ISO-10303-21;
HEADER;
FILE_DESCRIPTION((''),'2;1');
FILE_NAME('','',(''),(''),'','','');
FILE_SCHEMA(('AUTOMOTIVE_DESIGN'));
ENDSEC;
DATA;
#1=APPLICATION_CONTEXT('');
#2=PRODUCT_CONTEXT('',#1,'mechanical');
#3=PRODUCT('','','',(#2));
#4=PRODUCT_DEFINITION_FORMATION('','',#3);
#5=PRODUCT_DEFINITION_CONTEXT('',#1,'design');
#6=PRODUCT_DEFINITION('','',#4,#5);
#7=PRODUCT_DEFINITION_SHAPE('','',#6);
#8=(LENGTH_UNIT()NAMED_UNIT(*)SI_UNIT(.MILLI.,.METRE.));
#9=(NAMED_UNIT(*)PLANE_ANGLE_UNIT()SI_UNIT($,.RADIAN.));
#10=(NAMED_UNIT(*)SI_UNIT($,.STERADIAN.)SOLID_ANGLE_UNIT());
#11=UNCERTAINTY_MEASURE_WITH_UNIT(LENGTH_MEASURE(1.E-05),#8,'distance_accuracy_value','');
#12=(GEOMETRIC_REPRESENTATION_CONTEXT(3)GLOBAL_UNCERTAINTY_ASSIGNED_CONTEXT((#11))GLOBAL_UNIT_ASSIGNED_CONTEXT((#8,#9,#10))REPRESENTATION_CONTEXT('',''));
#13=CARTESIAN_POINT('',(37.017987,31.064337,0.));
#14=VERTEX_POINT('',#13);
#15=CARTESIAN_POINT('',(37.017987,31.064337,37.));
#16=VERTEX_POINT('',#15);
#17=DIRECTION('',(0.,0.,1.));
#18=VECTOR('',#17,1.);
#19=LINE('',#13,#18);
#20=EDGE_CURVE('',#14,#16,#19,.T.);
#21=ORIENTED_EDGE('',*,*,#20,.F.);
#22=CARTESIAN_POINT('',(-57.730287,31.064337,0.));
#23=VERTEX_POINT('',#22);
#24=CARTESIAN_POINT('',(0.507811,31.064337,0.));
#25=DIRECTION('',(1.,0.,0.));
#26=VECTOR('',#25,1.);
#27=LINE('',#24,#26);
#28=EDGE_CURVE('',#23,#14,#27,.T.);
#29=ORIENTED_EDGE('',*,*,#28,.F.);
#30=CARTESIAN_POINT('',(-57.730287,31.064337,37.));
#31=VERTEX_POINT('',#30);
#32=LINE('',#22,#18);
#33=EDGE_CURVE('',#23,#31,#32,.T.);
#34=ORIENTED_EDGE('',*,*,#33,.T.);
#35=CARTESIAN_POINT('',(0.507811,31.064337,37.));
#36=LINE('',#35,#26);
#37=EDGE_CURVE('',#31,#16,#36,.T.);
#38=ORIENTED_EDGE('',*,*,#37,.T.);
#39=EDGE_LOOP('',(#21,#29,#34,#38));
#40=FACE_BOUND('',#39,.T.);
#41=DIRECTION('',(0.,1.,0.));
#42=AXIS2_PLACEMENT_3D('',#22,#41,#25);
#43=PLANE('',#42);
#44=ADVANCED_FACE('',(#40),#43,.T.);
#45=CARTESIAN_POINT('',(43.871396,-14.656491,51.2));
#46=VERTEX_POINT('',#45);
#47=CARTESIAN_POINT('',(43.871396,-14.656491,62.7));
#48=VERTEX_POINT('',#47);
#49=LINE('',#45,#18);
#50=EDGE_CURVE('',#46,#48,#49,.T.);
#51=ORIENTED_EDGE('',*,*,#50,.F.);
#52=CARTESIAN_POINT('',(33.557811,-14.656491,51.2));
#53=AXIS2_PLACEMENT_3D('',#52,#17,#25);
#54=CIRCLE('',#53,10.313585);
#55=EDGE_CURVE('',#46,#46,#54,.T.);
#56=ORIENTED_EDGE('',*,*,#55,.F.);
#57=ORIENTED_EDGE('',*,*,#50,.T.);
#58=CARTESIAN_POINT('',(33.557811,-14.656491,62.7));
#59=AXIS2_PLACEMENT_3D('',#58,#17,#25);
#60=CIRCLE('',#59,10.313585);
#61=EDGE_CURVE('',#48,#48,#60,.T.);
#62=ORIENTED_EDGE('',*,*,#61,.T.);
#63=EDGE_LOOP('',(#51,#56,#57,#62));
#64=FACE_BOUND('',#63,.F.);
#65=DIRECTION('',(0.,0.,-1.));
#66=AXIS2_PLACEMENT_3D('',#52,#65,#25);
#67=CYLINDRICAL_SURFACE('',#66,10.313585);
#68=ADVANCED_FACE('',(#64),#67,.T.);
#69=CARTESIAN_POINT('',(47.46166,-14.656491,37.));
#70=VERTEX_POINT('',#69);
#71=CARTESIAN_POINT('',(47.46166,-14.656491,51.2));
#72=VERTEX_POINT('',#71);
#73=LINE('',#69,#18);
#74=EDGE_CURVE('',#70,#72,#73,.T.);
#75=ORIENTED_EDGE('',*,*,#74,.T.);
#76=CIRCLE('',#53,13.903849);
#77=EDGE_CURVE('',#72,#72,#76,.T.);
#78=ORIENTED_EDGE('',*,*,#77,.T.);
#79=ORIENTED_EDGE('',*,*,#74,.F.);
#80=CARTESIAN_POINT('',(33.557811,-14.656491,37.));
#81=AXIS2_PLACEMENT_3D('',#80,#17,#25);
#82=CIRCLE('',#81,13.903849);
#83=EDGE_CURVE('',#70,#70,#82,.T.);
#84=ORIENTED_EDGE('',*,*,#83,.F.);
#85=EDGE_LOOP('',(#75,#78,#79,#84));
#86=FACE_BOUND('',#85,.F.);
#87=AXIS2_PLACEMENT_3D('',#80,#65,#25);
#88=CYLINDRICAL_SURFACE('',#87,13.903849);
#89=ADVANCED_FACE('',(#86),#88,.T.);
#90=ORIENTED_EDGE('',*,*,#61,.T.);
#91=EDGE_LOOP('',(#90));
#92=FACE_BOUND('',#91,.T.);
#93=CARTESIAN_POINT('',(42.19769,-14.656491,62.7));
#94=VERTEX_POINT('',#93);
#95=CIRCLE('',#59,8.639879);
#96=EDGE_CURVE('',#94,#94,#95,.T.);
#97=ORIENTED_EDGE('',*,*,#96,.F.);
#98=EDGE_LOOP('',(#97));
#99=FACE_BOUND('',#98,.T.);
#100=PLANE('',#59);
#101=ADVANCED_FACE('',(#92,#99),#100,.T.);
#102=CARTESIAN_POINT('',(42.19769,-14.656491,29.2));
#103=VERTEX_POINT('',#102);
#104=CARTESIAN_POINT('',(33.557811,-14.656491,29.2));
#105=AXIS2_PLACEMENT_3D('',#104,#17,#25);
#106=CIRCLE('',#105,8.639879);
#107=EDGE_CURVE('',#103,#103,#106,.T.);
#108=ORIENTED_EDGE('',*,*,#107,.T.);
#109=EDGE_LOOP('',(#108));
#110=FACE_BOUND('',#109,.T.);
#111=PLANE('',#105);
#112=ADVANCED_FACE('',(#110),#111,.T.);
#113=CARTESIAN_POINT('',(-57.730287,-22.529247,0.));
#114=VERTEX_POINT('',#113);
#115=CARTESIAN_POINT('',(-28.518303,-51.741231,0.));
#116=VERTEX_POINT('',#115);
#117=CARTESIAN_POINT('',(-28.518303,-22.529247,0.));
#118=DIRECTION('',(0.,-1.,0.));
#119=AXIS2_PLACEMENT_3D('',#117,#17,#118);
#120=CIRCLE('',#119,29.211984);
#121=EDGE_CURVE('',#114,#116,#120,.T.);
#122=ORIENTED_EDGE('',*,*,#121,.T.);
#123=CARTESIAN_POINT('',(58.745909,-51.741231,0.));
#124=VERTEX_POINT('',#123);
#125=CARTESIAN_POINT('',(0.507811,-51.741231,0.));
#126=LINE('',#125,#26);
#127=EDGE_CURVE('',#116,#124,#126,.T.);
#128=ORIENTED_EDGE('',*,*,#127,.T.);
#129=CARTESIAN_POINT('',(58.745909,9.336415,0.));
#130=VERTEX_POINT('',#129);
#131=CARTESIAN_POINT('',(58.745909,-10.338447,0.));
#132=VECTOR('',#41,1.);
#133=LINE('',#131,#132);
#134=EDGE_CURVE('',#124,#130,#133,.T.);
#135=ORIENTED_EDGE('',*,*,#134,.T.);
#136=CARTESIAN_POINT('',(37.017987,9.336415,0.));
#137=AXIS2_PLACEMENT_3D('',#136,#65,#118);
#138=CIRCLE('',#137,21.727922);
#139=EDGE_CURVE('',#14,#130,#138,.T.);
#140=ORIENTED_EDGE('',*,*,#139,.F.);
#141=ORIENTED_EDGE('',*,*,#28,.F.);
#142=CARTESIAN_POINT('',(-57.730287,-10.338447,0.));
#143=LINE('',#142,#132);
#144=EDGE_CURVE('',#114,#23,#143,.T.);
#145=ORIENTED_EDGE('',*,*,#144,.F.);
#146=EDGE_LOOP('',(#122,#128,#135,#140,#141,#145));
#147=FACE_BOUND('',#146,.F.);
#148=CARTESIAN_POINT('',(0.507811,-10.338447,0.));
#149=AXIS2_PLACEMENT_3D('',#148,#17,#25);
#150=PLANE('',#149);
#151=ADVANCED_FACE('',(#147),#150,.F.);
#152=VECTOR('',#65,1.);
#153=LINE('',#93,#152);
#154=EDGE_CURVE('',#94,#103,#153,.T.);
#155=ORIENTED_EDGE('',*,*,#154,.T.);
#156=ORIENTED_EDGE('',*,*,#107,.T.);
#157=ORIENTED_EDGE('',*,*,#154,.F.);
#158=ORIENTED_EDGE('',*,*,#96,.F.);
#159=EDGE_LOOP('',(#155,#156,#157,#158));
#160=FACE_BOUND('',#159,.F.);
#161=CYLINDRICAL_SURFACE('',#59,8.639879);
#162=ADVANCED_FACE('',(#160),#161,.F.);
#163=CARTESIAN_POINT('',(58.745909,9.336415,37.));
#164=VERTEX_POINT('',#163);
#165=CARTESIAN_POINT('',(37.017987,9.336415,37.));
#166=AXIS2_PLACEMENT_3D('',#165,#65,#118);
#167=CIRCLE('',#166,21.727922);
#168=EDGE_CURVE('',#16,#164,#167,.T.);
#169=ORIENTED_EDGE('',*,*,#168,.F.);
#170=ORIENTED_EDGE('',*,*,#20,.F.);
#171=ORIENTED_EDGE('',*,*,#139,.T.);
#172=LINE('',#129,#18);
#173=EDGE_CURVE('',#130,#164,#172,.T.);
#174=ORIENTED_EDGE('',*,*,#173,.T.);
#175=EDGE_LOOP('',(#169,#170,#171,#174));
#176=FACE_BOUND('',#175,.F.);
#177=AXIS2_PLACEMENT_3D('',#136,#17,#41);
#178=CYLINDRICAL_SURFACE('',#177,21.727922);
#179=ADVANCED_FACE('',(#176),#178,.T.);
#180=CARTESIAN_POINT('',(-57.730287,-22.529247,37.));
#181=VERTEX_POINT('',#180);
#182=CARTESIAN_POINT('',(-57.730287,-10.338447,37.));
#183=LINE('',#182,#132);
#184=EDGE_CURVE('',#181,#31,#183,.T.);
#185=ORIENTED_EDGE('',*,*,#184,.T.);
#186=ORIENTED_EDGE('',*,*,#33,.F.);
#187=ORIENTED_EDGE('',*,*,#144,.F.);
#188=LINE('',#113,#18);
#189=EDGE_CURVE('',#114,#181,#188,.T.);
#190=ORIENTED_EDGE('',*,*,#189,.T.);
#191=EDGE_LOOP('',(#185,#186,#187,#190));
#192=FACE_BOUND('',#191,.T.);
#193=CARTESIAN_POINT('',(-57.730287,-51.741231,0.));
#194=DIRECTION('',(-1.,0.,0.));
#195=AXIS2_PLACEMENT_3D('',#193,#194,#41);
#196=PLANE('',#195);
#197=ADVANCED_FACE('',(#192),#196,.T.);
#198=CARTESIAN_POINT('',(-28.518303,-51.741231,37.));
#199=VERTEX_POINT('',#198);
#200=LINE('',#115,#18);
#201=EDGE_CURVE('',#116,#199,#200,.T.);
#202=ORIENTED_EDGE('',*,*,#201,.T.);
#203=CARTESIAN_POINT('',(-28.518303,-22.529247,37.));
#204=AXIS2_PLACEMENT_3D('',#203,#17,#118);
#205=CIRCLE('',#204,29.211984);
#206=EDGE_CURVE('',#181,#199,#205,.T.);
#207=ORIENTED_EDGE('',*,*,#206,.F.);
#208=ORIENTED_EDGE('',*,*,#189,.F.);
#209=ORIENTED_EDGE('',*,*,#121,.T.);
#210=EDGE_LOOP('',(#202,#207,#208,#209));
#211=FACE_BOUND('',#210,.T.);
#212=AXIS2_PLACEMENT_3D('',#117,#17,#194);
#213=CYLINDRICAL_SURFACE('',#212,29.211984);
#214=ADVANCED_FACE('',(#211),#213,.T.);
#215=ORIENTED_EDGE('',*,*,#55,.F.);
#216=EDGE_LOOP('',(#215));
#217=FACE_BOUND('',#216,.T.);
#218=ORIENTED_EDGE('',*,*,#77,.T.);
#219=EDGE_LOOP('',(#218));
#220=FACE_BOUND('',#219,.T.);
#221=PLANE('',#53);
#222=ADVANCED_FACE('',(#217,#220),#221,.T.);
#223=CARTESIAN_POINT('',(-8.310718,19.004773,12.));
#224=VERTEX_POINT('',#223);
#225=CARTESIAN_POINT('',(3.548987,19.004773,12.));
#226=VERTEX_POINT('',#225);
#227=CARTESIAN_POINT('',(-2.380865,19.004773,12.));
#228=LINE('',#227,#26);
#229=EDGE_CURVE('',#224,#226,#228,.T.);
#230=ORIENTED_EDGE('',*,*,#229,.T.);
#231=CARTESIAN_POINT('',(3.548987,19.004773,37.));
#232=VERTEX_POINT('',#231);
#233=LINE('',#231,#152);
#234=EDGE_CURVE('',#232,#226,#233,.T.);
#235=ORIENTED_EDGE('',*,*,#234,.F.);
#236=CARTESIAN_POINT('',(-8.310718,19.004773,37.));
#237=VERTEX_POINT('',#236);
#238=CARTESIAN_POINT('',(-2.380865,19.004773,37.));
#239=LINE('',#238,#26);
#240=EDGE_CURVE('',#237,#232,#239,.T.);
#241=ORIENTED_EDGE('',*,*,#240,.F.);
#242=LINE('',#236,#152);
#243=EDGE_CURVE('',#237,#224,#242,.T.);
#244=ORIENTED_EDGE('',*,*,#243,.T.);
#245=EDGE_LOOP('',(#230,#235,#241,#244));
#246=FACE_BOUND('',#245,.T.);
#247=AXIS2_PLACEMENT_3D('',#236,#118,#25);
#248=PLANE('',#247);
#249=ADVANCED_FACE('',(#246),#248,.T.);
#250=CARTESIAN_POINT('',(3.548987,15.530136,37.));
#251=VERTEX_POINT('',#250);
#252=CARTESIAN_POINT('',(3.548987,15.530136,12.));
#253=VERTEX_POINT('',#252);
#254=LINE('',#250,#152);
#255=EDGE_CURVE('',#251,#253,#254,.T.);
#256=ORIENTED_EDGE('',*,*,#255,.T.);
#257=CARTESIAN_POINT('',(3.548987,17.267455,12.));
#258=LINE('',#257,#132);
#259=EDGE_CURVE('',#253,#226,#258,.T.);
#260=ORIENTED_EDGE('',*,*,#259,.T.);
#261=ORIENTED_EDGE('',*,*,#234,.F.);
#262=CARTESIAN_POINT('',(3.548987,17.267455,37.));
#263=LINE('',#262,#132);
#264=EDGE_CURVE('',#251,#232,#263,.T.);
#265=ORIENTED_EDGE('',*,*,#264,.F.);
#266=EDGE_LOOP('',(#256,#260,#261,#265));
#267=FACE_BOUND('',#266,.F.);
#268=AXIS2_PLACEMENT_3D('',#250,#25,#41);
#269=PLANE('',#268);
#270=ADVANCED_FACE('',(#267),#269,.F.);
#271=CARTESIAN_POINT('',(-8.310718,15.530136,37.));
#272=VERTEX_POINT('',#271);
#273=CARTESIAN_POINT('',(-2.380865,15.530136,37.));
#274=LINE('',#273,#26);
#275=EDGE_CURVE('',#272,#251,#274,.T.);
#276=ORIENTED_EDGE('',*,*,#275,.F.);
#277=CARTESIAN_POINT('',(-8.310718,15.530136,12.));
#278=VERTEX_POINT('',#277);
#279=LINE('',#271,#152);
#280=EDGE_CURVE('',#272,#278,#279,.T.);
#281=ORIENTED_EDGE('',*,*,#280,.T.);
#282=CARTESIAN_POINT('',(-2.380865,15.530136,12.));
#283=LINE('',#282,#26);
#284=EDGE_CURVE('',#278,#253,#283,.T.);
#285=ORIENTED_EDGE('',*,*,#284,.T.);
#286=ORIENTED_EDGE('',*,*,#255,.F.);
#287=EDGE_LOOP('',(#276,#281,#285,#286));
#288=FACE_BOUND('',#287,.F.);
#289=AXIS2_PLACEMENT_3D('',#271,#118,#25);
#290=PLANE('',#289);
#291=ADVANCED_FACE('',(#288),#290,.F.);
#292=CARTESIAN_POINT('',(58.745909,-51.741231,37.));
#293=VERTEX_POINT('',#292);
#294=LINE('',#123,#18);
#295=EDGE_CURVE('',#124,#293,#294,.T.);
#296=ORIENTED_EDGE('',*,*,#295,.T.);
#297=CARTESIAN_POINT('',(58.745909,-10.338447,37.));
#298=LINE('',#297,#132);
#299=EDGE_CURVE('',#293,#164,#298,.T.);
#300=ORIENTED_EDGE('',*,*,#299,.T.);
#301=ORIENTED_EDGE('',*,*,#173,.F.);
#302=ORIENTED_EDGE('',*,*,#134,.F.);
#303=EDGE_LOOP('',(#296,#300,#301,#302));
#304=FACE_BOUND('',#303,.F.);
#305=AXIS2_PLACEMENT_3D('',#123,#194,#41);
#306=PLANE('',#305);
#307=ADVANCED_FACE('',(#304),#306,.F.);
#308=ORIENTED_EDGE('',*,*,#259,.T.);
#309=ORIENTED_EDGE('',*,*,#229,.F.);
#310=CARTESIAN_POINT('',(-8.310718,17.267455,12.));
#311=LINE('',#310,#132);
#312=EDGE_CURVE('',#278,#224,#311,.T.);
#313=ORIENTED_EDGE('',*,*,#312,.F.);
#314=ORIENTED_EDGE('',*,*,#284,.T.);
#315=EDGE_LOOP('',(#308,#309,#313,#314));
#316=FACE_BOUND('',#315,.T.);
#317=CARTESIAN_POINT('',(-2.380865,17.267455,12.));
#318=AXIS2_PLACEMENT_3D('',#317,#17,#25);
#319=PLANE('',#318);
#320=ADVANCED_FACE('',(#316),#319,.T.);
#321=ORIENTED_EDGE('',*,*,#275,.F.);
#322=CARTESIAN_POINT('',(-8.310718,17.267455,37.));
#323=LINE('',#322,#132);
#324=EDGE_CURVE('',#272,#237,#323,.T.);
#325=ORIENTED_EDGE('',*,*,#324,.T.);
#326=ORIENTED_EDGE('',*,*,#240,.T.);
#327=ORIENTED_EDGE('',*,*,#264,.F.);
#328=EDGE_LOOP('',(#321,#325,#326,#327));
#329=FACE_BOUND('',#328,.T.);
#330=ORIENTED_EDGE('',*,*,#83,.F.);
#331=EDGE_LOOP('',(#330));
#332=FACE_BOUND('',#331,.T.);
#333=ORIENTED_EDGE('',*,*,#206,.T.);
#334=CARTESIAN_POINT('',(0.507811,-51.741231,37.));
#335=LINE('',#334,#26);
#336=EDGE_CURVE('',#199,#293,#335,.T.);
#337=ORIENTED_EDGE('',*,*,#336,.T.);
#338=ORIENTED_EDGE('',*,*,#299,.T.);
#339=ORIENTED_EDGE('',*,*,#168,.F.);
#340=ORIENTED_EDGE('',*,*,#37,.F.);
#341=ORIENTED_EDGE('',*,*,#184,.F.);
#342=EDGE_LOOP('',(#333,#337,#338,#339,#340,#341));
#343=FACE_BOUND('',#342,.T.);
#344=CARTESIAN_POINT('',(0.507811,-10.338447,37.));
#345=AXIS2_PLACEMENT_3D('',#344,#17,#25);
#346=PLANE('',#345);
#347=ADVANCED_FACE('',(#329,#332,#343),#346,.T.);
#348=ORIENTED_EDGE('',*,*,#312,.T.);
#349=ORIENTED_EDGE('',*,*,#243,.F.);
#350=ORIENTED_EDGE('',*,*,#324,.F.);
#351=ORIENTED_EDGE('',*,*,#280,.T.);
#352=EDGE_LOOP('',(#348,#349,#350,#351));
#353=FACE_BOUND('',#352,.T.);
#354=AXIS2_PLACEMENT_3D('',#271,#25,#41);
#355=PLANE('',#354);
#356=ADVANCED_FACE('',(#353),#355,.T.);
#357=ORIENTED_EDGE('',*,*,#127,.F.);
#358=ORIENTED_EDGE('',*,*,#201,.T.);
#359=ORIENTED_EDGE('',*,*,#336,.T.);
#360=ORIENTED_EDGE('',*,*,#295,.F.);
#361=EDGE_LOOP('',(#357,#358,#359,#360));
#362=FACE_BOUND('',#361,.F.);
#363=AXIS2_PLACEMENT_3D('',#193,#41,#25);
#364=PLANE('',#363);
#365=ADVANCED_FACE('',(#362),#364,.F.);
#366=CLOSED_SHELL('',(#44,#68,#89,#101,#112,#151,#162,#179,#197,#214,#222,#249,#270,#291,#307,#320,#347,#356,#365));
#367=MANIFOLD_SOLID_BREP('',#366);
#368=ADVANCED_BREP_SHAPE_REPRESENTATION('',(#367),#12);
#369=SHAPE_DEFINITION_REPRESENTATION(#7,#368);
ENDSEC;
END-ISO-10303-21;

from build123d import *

# Parameters (mm, degrees)
F0_W      = 116.4761967957
F0_H      = 82.8055683523
F1_DEPTH  = 37
F2_R      = 13.9038489757
F3_DEPTH  = 14.2
F6_R      = 10.3135851835
F7_DEPTH  = 11.5
F8_R      = 8.6398790052
F9_DEPTH  = 33.5
F10_R     = 21.7279220614
F11_R     = 29.2119841047
F12_W     = 11.8597049732
F12_H     = 3.4746369347
F13_DEPTH = 25


# Not quite as in the source:
# - the program builds the solid bodies; features that only make, move or delete a surface that nothing else refers to are left out


with BuildPart() as f1:
    # F0 (on Top) → F1 (new body)
    with BuildSketch(Plane.XY):
        with Locations((0.5078110844, -10.3384470567)):
            Rectangle(F0_W, F0_H)
    extrude(amount=F1_DEPTH)

    # F2 (on face) → F3 (join)
    with BuildSketch(Plane.XY.offset(37)):
        with Locations((33.5578107329, -14.6564913073)):
            Circle(F2_R)
    extrude(amount=F3_DEPTH)

    # F6 (on face) → F7 (join)
    with BuildSketch(Plane.XY.offset(51.2)):
        with Locations((33.5578107329, -14.6564913073)):
            Circle(F6_R)
    extrude(amount=F7_DEPTH)

    # F8 (on face) → F9 (cut)
    with BuildSketch(Plane.XY.offset(62.7)):
        with Locations((33.5578107329, -14.6564913073)):
            Circle(F8_R)
    extrude(amount=-F9_DEPTH, mode=Mode.SUBTRACT)

    # F10
    f10_edges = [f1.edges().sort_by_distance(p)[0] for p in [
        (58.745909, 31.064337, 18.5),
    ]]
    fillet(f10_edges, radius=F10_R)

    # F11
    f11_edges = [f1.edges().sort_by_distance(p)[0] for p in [
        (-57.730287, -51.741231, 18.5),
    ]]
    fillet(f11_edges, radius=F11_R)

    # F12 (on face) → F13 (cut)
    with BuildSketch(Plane.XY.offset(37)):
        with Locations((-2.380865044, 17.2674548812)):
            Rectangle(F12_W, F12_H)
    extrude(amount=-F13_DEPTH, mode=Mode.SUBTRACT)


solid = f1.part
